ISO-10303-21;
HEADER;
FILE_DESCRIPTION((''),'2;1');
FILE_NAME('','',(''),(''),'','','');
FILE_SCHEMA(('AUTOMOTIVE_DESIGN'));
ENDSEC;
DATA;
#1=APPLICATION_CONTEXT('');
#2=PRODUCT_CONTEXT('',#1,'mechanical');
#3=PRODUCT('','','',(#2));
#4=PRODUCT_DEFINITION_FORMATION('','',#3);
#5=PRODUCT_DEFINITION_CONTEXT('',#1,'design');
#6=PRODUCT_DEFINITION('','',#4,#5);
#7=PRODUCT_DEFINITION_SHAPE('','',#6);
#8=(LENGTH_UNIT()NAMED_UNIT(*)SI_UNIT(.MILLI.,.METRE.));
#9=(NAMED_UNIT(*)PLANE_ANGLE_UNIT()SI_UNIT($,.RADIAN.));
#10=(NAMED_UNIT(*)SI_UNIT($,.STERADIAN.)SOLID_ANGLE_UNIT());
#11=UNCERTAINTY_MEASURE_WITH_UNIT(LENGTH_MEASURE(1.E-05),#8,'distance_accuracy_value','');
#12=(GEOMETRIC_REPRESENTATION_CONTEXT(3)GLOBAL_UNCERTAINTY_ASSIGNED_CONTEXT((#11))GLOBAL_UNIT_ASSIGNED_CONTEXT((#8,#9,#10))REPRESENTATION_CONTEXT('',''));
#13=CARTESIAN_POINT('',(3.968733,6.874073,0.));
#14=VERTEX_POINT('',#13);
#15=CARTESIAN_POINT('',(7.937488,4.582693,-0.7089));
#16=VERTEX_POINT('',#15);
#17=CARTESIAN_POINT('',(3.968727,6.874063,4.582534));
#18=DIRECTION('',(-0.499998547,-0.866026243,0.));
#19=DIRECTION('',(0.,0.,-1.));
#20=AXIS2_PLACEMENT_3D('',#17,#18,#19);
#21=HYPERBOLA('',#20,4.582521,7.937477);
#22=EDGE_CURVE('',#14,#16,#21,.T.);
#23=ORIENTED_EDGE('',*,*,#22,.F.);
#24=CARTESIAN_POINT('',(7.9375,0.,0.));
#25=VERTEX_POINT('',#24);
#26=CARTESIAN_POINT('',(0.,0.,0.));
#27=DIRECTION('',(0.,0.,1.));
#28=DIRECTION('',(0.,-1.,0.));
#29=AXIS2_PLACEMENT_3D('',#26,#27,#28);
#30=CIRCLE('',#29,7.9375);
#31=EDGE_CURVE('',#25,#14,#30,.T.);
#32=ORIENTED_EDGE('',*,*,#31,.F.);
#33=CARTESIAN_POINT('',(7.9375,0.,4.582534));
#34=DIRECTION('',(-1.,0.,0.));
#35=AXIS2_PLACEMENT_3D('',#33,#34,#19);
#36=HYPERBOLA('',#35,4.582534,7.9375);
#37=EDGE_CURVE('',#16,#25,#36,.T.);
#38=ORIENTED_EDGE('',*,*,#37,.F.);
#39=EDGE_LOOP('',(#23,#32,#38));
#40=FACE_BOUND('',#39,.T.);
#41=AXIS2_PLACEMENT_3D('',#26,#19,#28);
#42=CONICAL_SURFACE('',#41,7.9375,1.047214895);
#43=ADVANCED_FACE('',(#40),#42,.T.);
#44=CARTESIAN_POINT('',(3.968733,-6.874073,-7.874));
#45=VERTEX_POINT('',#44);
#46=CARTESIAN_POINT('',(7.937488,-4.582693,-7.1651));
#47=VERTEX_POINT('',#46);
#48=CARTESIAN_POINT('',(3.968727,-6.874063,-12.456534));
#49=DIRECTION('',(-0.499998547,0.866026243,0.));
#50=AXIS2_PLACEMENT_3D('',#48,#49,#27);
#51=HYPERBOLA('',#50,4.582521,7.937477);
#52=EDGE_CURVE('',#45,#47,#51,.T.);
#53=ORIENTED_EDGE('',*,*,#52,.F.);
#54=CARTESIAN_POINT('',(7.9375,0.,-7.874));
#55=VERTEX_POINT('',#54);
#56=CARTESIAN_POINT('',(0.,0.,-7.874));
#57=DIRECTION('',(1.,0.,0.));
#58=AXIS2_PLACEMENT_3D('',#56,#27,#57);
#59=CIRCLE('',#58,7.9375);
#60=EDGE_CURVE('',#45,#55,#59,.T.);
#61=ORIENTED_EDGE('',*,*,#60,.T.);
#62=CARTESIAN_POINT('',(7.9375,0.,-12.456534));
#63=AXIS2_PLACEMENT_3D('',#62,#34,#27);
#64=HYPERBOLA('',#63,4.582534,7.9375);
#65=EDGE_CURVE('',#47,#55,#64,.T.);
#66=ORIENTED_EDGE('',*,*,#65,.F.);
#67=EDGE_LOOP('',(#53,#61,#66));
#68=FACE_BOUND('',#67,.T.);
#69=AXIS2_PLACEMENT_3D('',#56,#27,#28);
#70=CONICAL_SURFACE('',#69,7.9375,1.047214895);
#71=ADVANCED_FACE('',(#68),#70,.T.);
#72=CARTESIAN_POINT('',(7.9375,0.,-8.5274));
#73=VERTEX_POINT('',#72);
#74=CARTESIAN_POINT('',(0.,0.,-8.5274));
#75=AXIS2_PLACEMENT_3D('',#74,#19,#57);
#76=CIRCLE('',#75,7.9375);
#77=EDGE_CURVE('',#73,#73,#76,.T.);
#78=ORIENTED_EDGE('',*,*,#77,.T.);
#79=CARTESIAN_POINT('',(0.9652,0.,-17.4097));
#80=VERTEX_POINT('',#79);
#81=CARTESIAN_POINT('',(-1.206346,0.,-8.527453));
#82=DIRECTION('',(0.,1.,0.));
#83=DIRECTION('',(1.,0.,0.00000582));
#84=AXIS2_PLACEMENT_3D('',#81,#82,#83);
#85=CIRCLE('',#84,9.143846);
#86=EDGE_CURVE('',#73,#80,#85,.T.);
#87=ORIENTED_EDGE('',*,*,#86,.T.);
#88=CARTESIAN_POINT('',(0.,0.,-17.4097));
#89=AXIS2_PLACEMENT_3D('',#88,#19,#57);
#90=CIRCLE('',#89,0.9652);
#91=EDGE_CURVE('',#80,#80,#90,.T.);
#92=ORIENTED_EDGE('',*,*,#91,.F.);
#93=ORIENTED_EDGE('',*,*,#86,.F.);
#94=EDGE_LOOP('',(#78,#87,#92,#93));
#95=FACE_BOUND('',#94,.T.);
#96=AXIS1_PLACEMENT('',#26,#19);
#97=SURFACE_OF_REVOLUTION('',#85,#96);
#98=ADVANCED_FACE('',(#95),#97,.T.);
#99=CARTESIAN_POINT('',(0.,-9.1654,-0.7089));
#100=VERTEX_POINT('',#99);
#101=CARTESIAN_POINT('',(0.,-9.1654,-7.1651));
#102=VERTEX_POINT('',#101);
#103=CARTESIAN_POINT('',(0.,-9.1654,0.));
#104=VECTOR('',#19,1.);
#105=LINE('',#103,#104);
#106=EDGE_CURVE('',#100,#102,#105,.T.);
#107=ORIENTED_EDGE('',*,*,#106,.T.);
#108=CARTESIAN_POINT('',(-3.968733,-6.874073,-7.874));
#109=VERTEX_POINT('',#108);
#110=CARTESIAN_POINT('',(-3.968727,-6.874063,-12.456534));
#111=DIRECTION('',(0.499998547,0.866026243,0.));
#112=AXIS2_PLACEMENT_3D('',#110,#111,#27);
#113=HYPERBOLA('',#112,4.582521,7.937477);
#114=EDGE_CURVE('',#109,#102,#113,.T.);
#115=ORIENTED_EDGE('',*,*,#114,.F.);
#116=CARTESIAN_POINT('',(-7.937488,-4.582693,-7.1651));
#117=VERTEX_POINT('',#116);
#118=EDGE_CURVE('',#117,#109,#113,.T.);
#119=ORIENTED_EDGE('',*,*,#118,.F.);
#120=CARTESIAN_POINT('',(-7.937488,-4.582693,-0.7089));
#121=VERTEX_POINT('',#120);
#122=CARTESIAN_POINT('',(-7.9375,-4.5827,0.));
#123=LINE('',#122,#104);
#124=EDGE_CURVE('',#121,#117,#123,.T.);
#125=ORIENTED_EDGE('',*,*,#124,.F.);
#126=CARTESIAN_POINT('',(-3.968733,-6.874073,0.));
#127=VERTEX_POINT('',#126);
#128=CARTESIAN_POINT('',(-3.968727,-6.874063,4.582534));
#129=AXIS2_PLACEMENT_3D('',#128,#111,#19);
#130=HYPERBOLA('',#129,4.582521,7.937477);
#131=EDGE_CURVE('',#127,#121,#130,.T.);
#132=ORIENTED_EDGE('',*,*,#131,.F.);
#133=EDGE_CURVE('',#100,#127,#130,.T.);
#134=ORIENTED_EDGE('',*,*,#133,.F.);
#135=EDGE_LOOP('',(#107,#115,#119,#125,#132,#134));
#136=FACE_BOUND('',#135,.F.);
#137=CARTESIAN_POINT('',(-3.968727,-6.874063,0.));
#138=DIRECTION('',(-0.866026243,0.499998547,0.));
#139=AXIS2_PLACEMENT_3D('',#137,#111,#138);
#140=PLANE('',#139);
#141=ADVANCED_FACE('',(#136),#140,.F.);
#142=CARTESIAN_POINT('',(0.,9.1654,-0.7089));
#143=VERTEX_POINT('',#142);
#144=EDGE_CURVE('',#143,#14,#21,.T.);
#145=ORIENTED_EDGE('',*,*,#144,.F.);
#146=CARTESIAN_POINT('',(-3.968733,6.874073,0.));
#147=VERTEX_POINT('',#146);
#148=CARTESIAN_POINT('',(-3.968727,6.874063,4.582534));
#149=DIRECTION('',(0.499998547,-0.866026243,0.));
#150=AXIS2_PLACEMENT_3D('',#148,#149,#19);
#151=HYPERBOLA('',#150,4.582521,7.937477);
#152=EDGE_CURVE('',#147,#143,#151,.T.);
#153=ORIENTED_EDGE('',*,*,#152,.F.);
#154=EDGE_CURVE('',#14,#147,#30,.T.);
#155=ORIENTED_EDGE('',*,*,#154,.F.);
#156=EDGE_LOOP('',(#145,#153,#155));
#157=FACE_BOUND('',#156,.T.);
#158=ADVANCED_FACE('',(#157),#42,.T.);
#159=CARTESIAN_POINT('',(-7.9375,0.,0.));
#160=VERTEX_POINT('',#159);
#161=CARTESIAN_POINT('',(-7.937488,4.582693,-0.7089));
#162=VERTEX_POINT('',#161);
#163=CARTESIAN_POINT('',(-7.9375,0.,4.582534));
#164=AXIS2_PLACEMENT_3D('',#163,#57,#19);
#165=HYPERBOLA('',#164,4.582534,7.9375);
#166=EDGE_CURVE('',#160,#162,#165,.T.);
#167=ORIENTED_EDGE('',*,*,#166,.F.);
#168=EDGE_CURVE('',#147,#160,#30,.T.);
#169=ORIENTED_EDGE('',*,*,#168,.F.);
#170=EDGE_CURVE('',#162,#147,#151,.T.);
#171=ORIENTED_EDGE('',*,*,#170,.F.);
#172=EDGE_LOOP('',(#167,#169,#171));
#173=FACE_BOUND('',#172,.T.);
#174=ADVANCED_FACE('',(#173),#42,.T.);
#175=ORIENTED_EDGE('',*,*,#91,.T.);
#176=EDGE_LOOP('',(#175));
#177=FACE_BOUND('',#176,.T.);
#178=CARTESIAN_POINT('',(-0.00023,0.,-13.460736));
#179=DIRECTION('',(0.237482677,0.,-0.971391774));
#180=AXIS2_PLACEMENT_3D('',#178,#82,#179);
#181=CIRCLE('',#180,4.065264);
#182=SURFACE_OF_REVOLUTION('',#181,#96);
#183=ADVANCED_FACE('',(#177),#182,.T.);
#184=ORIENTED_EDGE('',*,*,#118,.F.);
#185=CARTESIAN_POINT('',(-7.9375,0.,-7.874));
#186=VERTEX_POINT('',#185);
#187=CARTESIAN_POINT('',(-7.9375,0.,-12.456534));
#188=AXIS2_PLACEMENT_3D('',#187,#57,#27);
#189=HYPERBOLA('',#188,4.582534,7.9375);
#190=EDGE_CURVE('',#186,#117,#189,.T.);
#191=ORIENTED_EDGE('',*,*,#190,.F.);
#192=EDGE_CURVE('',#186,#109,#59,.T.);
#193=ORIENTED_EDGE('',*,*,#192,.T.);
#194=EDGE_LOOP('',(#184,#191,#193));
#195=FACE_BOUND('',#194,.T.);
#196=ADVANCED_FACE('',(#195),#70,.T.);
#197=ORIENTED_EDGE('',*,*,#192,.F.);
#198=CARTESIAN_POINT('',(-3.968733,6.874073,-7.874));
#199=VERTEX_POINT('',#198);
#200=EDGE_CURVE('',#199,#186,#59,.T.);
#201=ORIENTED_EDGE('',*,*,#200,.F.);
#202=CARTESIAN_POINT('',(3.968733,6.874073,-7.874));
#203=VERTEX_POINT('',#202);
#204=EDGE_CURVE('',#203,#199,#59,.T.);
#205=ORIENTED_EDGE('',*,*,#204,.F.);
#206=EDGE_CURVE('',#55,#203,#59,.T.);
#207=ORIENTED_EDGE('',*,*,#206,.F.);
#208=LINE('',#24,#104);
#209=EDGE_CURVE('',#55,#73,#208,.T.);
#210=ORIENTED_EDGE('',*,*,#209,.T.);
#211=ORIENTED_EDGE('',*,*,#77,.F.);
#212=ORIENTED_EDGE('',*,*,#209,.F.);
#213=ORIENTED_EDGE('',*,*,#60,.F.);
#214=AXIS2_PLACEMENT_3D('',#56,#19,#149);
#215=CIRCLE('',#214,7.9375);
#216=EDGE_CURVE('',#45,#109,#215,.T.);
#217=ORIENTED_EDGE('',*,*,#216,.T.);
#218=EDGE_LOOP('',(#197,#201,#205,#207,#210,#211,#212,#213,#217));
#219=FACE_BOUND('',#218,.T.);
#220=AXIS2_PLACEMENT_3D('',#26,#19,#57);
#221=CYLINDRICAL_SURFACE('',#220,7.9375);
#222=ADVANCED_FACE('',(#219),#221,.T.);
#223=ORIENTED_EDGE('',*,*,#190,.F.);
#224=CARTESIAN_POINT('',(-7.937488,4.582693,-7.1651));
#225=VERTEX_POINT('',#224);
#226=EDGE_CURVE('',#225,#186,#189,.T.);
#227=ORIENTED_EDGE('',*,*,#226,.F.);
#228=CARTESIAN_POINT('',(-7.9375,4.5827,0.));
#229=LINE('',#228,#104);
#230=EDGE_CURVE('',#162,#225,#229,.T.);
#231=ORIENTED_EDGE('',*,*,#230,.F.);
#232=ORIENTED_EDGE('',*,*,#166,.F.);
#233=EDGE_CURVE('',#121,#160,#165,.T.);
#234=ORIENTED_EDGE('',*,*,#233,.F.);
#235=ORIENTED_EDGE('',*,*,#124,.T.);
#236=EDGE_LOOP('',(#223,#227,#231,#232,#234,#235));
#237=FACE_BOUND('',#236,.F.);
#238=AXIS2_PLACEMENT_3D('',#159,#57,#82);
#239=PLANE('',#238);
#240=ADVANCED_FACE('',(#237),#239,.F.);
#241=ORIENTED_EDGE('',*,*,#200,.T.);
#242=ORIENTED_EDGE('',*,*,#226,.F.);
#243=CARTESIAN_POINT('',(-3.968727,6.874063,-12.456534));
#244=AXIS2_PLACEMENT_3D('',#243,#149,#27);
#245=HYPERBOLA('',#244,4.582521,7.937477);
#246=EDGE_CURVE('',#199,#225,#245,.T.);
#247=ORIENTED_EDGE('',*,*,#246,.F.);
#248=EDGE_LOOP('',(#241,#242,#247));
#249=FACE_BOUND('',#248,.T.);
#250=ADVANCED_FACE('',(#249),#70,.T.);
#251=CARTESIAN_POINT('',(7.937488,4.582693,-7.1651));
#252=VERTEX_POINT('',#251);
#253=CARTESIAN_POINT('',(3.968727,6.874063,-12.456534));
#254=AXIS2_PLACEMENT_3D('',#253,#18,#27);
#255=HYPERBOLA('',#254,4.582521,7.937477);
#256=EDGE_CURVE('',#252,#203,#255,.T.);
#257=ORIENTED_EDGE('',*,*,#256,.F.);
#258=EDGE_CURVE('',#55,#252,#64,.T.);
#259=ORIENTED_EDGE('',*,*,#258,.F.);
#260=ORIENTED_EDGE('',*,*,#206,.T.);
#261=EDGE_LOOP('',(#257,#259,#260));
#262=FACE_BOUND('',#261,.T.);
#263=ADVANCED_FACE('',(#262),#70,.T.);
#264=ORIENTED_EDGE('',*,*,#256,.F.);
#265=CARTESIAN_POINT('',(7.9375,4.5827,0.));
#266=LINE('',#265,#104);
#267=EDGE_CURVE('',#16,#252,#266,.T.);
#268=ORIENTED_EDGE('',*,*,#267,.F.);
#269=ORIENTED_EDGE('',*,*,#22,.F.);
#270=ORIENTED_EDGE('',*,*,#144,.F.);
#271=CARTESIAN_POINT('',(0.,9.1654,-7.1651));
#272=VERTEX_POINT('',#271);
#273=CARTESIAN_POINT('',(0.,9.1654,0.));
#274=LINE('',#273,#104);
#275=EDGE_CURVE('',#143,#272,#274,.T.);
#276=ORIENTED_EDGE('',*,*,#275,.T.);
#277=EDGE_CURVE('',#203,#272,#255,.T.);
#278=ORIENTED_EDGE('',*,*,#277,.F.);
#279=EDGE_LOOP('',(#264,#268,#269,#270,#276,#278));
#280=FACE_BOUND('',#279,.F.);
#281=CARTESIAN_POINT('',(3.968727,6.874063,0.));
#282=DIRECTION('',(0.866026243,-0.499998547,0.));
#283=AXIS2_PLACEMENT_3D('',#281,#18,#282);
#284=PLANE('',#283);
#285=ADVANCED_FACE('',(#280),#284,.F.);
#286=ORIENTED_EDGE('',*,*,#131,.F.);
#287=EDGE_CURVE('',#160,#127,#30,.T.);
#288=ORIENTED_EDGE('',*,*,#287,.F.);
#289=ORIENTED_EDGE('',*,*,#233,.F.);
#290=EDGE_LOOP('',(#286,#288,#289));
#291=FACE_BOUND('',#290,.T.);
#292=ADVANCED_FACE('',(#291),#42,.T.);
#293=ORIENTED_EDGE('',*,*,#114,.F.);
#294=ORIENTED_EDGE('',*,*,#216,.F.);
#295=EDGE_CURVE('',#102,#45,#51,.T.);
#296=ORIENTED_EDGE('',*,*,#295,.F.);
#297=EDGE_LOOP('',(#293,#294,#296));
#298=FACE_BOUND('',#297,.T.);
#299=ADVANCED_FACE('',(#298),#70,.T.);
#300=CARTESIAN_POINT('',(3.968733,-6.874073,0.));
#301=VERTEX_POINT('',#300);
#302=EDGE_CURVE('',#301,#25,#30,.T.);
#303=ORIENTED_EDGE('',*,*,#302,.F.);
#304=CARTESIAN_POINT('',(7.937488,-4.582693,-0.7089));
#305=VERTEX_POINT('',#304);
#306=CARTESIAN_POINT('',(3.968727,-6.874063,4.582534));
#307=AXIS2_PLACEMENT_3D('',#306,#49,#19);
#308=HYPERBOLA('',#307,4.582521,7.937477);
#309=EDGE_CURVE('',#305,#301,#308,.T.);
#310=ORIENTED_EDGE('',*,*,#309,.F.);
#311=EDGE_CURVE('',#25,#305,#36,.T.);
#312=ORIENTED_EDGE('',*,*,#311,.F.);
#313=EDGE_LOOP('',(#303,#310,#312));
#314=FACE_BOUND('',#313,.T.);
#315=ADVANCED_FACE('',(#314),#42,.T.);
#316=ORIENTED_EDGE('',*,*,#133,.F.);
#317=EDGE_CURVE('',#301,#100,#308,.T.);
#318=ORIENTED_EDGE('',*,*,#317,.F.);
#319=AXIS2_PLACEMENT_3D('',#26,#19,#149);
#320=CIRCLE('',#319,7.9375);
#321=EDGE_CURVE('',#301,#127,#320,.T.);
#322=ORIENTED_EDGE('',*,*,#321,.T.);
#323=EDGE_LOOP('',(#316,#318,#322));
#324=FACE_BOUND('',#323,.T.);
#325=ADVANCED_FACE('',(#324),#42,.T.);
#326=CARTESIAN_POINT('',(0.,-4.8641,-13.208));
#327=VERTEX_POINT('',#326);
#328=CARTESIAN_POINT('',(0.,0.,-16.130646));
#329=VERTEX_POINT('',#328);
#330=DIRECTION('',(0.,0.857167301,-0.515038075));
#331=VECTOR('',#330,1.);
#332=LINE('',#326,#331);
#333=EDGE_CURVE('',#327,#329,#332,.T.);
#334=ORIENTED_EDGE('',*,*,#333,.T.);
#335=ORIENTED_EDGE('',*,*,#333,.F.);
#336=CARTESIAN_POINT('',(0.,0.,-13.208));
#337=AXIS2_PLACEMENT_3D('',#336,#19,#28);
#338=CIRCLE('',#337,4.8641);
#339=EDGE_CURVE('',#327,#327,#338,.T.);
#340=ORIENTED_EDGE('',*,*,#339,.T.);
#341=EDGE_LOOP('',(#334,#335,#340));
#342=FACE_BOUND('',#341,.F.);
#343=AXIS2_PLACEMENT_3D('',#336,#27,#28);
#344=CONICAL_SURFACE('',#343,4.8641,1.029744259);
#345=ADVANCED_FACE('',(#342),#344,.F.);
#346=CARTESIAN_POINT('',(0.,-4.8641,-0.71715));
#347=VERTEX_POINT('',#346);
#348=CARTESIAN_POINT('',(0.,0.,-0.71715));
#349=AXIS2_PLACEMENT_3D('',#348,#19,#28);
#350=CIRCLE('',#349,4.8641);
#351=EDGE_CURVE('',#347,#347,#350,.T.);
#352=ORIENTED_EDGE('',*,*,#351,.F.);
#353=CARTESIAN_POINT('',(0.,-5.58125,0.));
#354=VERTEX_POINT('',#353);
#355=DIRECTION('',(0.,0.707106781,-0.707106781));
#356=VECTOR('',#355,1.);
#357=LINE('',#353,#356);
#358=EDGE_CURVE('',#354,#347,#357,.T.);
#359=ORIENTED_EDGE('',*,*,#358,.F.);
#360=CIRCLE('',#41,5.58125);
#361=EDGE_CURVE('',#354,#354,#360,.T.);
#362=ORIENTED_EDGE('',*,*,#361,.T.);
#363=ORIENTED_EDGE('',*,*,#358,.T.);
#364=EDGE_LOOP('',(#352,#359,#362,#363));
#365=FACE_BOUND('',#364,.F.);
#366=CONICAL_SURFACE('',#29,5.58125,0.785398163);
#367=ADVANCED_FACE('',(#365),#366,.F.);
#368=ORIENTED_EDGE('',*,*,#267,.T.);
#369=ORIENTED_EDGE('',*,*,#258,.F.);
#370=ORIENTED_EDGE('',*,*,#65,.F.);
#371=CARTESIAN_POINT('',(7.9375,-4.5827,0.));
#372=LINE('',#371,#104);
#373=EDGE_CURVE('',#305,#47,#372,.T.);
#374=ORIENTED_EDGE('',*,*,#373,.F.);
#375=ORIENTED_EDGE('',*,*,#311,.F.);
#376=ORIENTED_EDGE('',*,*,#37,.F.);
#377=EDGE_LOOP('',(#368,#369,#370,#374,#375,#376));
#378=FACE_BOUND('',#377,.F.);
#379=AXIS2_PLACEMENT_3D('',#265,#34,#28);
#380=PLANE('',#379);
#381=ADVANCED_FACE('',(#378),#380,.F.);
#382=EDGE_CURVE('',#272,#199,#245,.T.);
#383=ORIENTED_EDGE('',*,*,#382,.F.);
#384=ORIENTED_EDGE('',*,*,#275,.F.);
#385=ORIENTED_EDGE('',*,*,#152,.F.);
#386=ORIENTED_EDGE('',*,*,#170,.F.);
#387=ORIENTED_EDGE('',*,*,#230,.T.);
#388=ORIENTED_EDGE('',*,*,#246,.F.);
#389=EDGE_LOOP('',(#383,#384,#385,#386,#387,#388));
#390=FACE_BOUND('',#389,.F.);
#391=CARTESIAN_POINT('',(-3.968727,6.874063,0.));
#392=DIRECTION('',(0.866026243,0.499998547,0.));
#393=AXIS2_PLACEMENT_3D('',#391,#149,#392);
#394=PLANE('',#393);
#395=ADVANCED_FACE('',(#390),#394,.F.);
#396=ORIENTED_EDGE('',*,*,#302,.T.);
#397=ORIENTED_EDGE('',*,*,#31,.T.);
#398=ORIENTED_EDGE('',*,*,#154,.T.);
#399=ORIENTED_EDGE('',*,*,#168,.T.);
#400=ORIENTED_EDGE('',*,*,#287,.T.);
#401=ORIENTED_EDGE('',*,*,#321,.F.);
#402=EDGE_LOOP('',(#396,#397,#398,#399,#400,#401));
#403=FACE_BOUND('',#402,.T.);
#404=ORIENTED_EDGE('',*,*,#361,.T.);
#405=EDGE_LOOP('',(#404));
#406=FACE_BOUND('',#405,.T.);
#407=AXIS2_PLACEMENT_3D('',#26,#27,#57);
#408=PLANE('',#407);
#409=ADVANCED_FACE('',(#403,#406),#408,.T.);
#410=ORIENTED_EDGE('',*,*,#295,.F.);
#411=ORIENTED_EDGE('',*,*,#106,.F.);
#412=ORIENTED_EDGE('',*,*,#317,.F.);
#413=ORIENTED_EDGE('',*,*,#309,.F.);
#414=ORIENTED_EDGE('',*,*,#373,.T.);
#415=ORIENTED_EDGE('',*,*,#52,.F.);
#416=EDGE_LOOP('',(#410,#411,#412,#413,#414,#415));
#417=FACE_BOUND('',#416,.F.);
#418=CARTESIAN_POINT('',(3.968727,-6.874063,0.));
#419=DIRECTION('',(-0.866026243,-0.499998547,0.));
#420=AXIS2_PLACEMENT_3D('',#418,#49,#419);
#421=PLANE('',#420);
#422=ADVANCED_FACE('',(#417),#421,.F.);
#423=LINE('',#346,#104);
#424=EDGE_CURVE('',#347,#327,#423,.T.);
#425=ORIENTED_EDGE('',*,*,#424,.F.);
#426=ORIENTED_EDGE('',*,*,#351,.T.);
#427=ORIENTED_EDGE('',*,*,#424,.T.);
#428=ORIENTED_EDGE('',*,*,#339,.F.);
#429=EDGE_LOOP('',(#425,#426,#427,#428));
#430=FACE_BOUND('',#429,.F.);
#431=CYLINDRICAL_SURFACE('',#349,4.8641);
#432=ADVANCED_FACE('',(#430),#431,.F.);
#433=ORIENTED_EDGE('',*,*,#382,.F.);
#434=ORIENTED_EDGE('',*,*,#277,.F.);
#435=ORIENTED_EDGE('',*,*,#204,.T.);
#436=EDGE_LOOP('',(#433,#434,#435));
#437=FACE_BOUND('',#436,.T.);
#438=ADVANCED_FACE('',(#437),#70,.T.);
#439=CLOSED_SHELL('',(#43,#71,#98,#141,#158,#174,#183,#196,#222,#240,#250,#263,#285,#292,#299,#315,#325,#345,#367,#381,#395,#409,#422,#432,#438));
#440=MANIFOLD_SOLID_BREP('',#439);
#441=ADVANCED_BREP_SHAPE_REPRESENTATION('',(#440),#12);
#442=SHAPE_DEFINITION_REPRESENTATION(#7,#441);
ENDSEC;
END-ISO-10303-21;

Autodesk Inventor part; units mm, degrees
ref_plane "YZ Plane" through (0, 0, 0) normal (1, 0, 0) x (0, 1, 0)
sketch "Sketch2" plane through (0, 0, 0) normal (0, 1, 0) x (-1, 0, 0)
  line L0 (0, 0) -> (-7.9375, 0)
  line L1 (-7.9375, 0) -> (-7.9375, -8.5274)
  arc A0 (-7.9375, -8.5274) -> (-0.9652, -17.4097) centre (1.2065, -8.5274) ccw
  arc A1 (-0.9652, -17.4097) -> (0, -17.526) centre (0, -13.462) ccw
  line L2 (0, 0) -> (0, -17.526)
  line L3 (0, 0) -> (0, -17.526)
  dimension "d1" = 17.526
  dimension "d3" = 7.9375
  dimension "d5" = 0
  dimension "d7" = 4.064
  dimension "d9" = 9.144
revolve "Revolution1" add sketch "Sketch2" angle 360 about axis through (0, 0, 0) along (0, 0, -1)
sketch "Sketch7" plane through (0, 0, 0) normal (0, 0, 1) x (1, 0, 0)
  line L0 (-7.9375, -4.5827) -> (-7.9375, 4.5827)
  line L1 (-7.9375, 4.5827) -> (0, 9.1654)
  line L2 (0, 9.1654) -> (7.9375, 4.5827)
  line L3 (7.9375, 4.5827) -> (7.9375, -4.5827)
  line L4 (7.9375, -4.5827) -> (0, -9.1654)
  line L5 (0, -9.1654) -> (-7.9375, -4.5827)
  circle A0 centre (0, 0) radius 7.9375 projected
extrude "Extrusion1" add sketch "Sketch7" against normal blind 7.874 contours L0 A0 L5 | L0 L1 A0 | A0 L4 L5 | L1 L2 A0 | A0 L3 L4 | L2 L3 A0
sketch "Sketch9" plane through (0, 0, 0) normal (1, 0, 0) x (0, 1, 0)
  line L0 (-9.1654, -7.1651) -> (-9.1654, -7.874)
  line L1 (-9.1654, -7.874) -> (-7.9375, -7.874)
  line L2 (-7.9375, -7.874) -> (-9.1654, -7.1651)
  line L3 (0, -8.0158) -> (0, -7.0233) projected
  point P0 (-9.1654, -7.874)
  dimension "d53" = 15.875
  dimension "d54" = 30
revolve "Revolution2" cut sketch "Sketch9" angle 360 about axis through (0, 0, -10) along (0, 0, 1)
sketch "Sketch11" plane through (-7.9375, -4.5827, 0) normal (0, 0, 1) x (1, 0, 0)
  line L0 (7.9375, -4.5827) -> (0, 0) projected
  line L1 (15.875, 9.1654) -> (15.875, 0) projected
  line L2 (7.9375, 13.7482) -> (7.9375, -4.5827) construction
  line L3 (0, 9.1654) -> (15.875, 0) construction
  point P0 (7.9375, 4.5827)
hole "Hole1" at (0, 0, 0) direction (0, 0, -1) diameter 9.7282 depth 13.208 tip angle 118 countersink diameter 11.1625 countersink angle 90 thread size "7/16-20 UNF" class "2B" standard "ANSI Unified Screw Threads"
sketch "Sketch8" plane through (0, 0, 0) normal (1, 0, 0) x (0, 1, 0)
  line L0 (-9.1654, -0.7089) -> (-9.1654, 0)
  line L1 (-9.1654, 0) -> (-7.9375, 0)
  line L2 (-7.9375, 0) -> (-9.1654, -0.7089)
  line L3 (0, -0.8507) -> (0, 0.1418) projected
  point P0 (-9.1654, 0)
  dimension "d49" = 15.875
  dimension "d50" = 30
revolve "Revolution3" cut sketch "Sketch8" angle 360 about axis through (0, 0, -10) along (0, 0, 1)
ref_plane "MSC_PF1" through (0, 0, 0) normal (1, 0, 0) x (0, 1, 0)
ref_plane "MSC_PT1" through (0, 0, 0) normal (0, 0, 1) x (1, 0, 0)
equation "\"d47\" = q"
equation "\"d76\" = PTC + NND"
equation "\"d79\" = tt"
equation "\"d1\" = ParH"
equation "\"d3\" = 0.5 * ParF"
equation "\"d7\" = r"
equation "\"d9\" = ParS"
equation "\"d49\" = ParF"
equation "\"d53\" = ParF"
equation "\"NND\" = 11.1125"
equation "\"ParF\" = 15.875"
equation "\"g1\" = 18.3388"
equation "\"ParH\" = 17.526"
equation "\"q\" = 7.874"
equation "\"r\" = 4.064"
equation "\"ParS\" = 9.144"
equation "\"tt\" = 13.208"
equation "\"THREADDIA\" = NND"
equation "\"PTC\" = 0.05"
properties part number "ANSI B 18.2.2 - 7/16-20" material "Steel, Mild"
